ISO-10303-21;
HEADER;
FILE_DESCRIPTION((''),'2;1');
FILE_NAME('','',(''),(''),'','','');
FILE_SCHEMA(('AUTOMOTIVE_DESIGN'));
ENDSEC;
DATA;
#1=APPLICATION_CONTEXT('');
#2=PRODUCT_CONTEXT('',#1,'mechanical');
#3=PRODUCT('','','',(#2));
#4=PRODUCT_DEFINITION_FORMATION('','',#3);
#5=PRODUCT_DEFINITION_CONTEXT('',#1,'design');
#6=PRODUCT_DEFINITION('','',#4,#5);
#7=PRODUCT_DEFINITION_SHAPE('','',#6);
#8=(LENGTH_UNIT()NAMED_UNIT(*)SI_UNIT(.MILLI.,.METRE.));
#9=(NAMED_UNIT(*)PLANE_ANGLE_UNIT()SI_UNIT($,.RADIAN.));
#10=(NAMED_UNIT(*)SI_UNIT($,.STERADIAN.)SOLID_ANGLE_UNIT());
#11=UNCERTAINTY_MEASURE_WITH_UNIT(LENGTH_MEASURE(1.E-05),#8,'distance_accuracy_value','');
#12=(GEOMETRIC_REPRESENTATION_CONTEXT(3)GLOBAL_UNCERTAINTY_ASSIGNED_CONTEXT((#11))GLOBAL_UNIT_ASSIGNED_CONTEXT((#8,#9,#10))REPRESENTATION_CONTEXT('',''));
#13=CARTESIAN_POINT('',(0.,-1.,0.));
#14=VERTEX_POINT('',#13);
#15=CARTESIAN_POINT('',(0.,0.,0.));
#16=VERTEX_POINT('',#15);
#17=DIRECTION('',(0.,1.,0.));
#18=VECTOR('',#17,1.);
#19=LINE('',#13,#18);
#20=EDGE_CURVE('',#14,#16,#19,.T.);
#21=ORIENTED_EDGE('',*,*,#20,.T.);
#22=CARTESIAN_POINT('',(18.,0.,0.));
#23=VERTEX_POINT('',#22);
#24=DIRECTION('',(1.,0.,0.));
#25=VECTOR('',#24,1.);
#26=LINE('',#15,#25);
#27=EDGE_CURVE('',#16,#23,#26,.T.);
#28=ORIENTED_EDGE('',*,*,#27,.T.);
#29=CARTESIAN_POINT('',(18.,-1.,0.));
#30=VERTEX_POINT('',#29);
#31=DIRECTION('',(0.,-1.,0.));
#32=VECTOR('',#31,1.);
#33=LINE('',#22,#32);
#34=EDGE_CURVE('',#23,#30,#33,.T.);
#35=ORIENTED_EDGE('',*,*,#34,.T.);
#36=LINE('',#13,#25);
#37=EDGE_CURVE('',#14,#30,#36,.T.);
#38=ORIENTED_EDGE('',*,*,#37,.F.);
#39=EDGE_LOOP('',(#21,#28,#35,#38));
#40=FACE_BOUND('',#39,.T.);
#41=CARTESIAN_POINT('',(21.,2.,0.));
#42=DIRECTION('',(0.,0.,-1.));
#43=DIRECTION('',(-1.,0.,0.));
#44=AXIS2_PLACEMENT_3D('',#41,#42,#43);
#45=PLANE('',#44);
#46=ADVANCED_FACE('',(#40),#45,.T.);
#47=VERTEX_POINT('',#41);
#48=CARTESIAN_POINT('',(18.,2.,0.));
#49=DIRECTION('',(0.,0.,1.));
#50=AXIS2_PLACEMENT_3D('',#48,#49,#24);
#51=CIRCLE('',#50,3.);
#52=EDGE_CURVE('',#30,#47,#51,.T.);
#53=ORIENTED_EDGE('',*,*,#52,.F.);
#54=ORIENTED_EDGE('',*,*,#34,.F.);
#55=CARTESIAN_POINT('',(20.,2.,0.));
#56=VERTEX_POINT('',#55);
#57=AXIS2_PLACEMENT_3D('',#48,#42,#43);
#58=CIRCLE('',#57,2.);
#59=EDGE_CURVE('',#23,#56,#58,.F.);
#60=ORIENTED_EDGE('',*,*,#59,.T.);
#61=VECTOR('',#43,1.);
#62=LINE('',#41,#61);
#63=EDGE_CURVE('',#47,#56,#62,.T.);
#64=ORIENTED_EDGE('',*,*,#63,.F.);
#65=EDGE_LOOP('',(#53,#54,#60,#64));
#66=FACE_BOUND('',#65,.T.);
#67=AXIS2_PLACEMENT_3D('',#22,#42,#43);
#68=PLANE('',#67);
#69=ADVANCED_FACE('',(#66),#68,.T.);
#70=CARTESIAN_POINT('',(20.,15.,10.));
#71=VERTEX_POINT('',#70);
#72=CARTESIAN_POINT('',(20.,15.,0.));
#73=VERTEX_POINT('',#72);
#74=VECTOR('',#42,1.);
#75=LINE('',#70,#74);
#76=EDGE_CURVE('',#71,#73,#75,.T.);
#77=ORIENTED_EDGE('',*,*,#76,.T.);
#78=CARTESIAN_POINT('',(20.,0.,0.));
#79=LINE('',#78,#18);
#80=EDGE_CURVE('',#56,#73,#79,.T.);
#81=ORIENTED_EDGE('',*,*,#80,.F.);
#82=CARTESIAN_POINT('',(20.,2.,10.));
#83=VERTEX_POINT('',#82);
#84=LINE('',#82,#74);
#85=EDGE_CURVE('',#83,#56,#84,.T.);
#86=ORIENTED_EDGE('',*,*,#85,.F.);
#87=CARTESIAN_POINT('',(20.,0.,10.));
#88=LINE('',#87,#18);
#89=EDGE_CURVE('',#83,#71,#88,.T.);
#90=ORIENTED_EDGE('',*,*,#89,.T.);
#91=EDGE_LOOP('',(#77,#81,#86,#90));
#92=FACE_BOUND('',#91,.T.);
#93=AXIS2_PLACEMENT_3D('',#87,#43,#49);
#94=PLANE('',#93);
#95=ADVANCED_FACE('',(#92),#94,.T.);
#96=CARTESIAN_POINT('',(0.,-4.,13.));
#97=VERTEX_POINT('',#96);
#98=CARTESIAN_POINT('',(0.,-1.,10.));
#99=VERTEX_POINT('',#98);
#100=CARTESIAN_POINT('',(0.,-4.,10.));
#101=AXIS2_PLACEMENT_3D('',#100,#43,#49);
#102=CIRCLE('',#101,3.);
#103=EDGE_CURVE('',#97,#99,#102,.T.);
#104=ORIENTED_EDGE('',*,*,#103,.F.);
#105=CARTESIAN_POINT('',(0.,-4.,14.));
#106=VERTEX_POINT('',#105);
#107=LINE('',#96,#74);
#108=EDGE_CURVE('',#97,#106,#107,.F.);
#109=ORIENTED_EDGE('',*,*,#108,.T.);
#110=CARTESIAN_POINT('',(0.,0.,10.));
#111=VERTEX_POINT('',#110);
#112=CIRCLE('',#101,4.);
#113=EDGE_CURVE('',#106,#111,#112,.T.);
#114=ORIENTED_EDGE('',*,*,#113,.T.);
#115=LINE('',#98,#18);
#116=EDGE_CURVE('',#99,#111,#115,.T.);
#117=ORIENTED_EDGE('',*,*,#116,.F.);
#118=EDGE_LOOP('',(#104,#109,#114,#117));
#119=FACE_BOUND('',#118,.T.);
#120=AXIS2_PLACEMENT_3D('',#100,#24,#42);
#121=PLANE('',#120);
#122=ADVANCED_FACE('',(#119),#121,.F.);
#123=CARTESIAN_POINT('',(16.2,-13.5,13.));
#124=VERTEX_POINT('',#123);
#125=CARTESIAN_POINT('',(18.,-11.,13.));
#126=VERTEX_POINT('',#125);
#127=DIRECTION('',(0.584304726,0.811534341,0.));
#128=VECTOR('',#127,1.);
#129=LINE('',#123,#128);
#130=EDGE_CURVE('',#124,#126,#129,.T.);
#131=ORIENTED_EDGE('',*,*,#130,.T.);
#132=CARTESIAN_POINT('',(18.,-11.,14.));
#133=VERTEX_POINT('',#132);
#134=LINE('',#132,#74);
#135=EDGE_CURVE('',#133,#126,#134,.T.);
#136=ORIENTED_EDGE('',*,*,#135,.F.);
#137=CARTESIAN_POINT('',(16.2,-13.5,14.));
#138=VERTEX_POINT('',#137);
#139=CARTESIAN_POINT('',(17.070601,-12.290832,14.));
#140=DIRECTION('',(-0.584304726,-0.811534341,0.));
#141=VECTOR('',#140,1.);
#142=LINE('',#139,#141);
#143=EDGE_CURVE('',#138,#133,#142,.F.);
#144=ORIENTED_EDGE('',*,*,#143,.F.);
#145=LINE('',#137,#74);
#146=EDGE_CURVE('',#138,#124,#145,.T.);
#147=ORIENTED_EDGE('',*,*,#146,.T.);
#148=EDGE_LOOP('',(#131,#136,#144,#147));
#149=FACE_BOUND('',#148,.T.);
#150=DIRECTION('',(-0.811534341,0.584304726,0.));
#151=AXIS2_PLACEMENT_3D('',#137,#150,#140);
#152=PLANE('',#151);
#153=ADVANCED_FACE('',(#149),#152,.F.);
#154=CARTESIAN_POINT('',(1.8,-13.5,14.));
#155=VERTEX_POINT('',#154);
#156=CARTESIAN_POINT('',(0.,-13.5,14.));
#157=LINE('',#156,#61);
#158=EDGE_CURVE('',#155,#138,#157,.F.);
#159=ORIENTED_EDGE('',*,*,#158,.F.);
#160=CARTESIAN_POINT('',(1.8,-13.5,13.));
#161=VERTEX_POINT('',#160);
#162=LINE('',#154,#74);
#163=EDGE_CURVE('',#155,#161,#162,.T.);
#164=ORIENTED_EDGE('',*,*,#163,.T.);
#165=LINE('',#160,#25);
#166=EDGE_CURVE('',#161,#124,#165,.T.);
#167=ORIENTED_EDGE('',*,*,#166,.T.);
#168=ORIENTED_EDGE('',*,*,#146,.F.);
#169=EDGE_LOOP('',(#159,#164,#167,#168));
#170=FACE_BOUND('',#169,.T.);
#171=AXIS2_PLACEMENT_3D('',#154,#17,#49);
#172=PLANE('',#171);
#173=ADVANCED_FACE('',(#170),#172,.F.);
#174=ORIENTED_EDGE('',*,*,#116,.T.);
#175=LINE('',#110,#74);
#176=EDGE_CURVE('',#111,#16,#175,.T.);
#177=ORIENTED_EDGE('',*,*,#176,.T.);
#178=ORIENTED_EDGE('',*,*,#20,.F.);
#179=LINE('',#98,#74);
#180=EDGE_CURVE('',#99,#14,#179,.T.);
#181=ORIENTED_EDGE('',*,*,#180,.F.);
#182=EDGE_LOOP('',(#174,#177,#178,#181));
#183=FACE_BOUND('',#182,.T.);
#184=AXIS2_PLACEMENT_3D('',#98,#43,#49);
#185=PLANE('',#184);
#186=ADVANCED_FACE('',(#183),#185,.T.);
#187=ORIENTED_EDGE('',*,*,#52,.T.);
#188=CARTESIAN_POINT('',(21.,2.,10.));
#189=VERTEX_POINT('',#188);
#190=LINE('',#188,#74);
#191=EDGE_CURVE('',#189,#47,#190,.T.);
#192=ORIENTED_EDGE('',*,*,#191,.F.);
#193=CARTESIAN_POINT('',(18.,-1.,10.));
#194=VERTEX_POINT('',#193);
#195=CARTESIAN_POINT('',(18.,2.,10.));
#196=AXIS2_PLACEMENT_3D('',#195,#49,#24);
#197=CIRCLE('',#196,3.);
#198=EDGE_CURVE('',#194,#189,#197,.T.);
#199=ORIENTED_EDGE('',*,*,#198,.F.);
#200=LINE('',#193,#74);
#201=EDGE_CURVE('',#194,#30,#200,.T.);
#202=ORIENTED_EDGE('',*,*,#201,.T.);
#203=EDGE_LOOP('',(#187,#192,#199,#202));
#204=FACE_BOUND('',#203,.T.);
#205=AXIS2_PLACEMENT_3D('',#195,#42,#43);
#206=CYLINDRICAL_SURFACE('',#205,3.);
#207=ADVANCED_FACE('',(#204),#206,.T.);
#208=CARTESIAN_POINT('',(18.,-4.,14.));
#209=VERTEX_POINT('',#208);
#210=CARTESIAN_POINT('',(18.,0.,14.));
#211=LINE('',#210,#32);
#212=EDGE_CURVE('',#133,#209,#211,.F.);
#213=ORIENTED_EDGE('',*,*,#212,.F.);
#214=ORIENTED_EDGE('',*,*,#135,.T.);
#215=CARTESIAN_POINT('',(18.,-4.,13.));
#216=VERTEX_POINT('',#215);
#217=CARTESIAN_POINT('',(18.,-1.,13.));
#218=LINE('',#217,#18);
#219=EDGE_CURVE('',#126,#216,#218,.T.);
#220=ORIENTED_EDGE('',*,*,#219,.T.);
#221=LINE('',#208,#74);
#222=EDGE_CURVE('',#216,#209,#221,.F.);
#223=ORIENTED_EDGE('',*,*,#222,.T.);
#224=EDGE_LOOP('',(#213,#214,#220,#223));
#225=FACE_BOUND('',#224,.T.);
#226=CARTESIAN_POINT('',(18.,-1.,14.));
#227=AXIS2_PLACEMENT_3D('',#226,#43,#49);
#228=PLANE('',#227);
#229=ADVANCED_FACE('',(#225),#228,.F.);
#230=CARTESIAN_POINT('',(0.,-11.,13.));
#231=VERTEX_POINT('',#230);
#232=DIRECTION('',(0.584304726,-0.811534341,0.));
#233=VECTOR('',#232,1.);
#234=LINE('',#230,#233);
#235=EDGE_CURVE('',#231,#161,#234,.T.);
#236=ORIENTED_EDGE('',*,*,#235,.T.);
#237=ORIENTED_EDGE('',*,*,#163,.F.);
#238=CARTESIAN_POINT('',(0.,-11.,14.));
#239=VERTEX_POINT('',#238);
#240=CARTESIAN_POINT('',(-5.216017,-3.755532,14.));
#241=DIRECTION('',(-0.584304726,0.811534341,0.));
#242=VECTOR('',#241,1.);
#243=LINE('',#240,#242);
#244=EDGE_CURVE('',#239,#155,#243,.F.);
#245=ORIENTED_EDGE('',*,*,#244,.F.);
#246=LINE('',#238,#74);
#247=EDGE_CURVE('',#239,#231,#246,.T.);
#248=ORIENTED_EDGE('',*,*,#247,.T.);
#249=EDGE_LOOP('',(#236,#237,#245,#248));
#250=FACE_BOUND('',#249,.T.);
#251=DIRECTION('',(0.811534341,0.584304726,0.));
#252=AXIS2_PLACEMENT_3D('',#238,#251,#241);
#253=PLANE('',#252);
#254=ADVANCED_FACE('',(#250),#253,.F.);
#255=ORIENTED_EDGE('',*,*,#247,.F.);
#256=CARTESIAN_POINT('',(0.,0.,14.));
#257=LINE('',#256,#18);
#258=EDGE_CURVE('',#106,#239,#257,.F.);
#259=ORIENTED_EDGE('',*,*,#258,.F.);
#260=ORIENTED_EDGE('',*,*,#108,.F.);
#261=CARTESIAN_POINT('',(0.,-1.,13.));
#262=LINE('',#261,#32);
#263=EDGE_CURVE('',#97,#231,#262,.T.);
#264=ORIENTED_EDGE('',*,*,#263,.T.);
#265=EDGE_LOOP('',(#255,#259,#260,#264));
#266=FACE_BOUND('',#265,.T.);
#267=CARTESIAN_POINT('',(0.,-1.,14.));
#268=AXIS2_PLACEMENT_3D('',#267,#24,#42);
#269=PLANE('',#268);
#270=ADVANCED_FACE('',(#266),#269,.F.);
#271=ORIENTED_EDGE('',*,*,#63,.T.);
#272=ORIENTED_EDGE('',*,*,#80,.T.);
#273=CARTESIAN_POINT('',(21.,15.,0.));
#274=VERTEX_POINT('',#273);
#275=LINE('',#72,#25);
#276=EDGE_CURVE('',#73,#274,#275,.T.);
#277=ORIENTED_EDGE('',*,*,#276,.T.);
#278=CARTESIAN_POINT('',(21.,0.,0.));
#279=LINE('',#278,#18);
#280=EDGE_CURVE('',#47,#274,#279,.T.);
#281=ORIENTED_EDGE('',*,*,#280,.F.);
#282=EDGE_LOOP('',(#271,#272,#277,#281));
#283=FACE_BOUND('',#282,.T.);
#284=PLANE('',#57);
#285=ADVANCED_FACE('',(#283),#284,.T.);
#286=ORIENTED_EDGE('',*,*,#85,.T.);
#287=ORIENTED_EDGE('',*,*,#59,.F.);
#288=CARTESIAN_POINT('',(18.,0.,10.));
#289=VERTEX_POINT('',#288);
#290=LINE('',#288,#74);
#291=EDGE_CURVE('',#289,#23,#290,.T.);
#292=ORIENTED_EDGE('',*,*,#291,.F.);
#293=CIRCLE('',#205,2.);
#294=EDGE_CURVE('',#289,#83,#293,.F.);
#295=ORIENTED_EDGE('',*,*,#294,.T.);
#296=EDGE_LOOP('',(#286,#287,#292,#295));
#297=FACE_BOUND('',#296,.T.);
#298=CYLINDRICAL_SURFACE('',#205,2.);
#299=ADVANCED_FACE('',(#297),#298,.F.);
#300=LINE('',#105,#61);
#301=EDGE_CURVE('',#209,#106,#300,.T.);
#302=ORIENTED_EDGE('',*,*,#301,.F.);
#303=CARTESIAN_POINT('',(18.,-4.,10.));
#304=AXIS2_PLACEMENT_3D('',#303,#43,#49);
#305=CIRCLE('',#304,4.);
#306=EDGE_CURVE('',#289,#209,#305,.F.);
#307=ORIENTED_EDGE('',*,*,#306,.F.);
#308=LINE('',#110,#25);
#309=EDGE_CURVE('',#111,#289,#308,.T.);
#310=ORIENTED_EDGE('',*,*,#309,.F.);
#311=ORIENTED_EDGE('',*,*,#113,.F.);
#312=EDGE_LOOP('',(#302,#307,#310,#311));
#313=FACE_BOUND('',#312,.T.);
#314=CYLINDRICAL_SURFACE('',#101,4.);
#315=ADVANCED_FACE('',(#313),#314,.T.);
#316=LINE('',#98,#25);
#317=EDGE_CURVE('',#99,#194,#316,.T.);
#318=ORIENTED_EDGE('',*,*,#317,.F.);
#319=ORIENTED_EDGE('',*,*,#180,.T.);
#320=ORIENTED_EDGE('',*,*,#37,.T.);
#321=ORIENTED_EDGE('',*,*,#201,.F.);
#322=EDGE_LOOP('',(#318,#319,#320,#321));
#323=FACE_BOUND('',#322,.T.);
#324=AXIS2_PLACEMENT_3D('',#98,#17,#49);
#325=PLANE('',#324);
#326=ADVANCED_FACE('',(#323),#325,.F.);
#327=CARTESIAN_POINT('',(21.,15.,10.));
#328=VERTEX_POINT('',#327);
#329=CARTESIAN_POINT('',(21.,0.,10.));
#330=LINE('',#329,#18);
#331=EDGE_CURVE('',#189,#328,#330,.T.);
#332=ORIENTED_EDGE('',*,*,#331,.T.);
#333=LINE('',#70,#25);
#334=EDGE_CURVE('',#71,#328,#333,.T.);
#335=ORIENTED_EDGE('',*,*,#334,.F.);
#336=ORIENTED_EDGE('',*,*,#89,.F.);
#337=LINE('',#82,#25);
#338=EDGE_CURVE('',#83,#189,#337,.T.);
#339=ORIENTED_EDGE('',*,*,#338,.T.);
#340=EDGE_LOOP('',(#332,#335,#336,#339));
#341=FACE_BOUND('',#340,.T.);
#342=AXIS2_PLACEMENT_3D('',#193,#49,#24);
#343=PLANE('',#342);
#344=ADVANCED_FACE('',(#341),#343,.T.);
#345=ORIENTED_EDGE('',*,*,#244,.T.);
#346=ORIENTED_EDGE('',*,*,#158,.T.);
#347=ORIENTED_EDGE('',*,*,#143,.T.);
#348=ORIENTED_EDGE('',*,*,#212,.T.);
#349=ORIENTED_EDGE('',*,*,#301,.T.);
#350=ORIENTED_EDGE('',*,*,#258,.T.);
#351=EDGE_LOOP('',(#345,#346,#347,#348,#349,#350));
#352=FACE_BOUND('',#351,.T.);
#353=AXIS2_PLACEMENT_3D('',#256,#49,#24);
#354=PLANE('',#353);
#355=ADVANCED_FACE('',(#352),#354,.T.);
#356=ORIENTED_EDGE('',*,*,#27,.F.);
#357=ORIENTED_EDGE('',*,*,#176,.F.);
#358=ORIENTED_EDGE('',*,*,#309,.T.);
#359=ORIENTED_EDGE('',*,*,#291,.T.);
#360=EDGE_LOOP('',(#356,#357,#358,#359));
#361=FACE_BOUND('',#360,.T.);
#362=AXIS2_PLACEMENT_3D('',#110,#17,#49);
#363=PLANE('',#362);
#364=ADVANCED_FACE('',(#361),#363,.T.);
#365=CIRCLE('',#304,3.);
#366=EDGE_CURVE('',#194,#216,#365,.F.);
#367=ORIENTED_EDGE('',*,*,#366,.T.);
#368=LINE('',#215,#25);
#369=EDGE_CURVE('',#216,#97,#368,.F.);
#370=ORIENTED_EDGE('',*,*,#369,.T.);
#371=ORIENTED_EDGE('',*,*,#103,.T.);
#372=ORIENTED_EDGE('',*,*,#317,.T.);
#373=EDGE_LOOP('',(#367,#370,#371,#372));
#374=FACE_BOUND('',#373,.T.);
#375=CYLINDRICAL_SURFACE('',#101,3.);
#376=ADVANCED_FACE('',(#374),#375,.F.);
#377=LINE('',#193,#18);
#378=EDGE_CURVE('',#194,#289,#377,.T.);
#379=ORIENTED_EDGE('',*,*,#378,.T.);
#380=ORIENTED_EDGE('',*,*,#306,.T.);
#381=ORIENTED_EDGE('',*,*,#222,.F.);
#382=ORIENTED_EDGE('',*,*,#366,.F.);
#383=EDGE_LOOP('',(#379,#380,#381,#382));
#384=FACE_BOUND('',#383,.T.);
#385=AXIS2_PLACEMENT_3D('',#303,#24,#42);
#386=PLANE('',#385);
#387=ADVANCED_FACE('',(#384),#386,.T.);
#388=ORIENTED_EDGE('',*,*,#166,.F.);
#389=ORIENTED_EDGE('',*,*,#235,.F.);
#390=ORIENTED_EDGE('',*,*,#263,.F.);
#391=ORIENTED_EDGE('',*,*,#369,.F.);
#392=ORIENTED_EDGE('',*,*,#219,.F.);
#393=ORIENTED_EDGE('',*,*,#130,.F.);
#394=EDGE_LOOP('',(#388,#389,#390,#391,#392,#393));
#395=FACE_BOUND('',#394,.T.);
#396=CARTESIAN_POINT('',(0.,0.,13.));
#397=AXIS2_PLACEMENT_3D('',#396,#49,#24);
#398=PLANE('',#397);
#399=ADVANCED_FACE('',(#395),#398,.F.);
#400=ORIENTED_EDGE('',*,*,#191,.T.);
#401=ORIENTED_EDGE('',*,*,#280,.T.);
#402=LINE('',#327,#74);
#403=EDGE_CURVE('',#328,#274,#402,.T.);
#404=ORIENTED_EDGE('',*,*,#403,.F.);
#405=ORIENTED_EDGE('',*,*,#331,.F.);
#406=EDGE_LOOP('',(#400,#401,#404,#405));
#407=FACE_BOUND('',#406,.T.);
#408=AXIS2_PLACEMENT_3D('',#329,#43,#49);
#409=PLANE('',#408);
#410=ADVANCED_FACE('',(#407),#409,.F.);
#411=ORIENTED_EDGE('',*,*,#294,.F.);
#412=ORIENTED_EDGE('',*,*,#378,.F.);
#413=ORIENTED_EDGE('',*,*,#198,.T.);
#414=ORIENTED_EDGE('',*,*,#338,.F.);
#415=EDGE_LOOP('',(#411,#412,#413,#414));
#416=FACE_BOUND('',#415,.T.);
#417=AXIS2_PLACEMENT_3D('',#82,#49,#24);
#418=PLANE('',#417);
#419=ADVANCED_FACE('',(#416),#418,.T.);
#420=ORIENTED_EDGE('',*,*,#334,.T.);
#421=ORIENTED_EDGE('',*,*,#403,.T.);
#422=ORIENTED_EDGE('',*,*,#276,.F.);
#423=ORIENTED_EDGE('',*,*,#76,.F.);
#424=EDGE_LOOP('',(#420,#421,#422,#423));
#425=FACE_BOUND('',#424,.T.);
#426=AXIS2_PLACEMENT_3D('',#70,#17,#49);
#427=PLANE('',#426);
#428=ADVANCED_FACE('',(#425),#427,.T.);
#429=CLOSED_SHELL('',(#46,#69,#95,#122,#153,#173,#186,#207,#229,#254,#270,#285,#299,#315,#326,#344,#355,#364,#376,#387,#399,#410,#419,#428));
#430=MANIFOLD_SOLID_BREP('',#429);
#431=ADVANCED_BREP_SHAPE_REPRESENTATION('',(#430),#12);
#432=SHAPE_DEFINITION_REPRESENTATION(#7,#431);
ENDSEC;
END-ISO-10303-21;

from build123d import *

# Parameters (mm, degrees)
SM_BASE_FLANGE_1_DEPTH      = 10
SM_EDGE_FLANGE_2_DEPTH      = 18
SM_START                    = 1
SM_EDGE_FLANGE_2_FLAT_DEPTH = 1


# Sheet-metal steps are written as plain solids
with BuildPart() as part:
    # Sketch 1 → 基体-法兰1 (new body)
    with BuildSketch(Plane.XY):
        with BuildLine():
            Line((0, 0), (18, 0))
            ThreePointArc((18, 0), (19.414213562, 0.585786438), (20, 2))
            Line((20, 2), (20, 15))
            Line((20, 15), (21, 15))
            Line((21, 15), (21, 2))
            ThreePointArc((21, 2), (20.121320344, -0.121320344), (18, -1))
            Line((18, -1), (0, -1))
            Line((0, -1), (0, 0))
        make_face()
    extrude(amount=SM_BASE_FLANGE_1_DEPTH)

    # 边线-法兰2 bend section (across the edge) → 边线-法兰2 (add)
    with BuildSketch(Plane(origin=(18, -1, 13), x_dir=(0, 0, -1), z_dir=(-1, 0, 0))):
        with BuildLine():
            Line((-1, 3), (0, 3))
            ThreePointArc((0, 3), (0.878679656, 0.878679656), (3, 0))
            Line((3, 0), (3, -1))
            ThreePointArc((3, -1), (0.171572875, 0.171572875), (-1, 3))
        make_face()
    extrude(amount=SM_EDGE_FLANGE_2_DEPTH)

    # 边线-法兰2 profile (on flange) → 边线-法兰2 flat (add)
    with BuildSketch(Plane(origin=(0, -1, 13), x_dir=(-1, 0, 0), z_dir=(0, 0, 1)).offset(SM_START)):
        Polygon((0, 3), (0, 10), (-1.8, 12.5), (-16.2, 12.5), (-18, 10), (-18, 3), align=None)
    extrude(amount=-SM_EDGE_FLANGE_2_FLAT_DEPTH)


solid = part.part
